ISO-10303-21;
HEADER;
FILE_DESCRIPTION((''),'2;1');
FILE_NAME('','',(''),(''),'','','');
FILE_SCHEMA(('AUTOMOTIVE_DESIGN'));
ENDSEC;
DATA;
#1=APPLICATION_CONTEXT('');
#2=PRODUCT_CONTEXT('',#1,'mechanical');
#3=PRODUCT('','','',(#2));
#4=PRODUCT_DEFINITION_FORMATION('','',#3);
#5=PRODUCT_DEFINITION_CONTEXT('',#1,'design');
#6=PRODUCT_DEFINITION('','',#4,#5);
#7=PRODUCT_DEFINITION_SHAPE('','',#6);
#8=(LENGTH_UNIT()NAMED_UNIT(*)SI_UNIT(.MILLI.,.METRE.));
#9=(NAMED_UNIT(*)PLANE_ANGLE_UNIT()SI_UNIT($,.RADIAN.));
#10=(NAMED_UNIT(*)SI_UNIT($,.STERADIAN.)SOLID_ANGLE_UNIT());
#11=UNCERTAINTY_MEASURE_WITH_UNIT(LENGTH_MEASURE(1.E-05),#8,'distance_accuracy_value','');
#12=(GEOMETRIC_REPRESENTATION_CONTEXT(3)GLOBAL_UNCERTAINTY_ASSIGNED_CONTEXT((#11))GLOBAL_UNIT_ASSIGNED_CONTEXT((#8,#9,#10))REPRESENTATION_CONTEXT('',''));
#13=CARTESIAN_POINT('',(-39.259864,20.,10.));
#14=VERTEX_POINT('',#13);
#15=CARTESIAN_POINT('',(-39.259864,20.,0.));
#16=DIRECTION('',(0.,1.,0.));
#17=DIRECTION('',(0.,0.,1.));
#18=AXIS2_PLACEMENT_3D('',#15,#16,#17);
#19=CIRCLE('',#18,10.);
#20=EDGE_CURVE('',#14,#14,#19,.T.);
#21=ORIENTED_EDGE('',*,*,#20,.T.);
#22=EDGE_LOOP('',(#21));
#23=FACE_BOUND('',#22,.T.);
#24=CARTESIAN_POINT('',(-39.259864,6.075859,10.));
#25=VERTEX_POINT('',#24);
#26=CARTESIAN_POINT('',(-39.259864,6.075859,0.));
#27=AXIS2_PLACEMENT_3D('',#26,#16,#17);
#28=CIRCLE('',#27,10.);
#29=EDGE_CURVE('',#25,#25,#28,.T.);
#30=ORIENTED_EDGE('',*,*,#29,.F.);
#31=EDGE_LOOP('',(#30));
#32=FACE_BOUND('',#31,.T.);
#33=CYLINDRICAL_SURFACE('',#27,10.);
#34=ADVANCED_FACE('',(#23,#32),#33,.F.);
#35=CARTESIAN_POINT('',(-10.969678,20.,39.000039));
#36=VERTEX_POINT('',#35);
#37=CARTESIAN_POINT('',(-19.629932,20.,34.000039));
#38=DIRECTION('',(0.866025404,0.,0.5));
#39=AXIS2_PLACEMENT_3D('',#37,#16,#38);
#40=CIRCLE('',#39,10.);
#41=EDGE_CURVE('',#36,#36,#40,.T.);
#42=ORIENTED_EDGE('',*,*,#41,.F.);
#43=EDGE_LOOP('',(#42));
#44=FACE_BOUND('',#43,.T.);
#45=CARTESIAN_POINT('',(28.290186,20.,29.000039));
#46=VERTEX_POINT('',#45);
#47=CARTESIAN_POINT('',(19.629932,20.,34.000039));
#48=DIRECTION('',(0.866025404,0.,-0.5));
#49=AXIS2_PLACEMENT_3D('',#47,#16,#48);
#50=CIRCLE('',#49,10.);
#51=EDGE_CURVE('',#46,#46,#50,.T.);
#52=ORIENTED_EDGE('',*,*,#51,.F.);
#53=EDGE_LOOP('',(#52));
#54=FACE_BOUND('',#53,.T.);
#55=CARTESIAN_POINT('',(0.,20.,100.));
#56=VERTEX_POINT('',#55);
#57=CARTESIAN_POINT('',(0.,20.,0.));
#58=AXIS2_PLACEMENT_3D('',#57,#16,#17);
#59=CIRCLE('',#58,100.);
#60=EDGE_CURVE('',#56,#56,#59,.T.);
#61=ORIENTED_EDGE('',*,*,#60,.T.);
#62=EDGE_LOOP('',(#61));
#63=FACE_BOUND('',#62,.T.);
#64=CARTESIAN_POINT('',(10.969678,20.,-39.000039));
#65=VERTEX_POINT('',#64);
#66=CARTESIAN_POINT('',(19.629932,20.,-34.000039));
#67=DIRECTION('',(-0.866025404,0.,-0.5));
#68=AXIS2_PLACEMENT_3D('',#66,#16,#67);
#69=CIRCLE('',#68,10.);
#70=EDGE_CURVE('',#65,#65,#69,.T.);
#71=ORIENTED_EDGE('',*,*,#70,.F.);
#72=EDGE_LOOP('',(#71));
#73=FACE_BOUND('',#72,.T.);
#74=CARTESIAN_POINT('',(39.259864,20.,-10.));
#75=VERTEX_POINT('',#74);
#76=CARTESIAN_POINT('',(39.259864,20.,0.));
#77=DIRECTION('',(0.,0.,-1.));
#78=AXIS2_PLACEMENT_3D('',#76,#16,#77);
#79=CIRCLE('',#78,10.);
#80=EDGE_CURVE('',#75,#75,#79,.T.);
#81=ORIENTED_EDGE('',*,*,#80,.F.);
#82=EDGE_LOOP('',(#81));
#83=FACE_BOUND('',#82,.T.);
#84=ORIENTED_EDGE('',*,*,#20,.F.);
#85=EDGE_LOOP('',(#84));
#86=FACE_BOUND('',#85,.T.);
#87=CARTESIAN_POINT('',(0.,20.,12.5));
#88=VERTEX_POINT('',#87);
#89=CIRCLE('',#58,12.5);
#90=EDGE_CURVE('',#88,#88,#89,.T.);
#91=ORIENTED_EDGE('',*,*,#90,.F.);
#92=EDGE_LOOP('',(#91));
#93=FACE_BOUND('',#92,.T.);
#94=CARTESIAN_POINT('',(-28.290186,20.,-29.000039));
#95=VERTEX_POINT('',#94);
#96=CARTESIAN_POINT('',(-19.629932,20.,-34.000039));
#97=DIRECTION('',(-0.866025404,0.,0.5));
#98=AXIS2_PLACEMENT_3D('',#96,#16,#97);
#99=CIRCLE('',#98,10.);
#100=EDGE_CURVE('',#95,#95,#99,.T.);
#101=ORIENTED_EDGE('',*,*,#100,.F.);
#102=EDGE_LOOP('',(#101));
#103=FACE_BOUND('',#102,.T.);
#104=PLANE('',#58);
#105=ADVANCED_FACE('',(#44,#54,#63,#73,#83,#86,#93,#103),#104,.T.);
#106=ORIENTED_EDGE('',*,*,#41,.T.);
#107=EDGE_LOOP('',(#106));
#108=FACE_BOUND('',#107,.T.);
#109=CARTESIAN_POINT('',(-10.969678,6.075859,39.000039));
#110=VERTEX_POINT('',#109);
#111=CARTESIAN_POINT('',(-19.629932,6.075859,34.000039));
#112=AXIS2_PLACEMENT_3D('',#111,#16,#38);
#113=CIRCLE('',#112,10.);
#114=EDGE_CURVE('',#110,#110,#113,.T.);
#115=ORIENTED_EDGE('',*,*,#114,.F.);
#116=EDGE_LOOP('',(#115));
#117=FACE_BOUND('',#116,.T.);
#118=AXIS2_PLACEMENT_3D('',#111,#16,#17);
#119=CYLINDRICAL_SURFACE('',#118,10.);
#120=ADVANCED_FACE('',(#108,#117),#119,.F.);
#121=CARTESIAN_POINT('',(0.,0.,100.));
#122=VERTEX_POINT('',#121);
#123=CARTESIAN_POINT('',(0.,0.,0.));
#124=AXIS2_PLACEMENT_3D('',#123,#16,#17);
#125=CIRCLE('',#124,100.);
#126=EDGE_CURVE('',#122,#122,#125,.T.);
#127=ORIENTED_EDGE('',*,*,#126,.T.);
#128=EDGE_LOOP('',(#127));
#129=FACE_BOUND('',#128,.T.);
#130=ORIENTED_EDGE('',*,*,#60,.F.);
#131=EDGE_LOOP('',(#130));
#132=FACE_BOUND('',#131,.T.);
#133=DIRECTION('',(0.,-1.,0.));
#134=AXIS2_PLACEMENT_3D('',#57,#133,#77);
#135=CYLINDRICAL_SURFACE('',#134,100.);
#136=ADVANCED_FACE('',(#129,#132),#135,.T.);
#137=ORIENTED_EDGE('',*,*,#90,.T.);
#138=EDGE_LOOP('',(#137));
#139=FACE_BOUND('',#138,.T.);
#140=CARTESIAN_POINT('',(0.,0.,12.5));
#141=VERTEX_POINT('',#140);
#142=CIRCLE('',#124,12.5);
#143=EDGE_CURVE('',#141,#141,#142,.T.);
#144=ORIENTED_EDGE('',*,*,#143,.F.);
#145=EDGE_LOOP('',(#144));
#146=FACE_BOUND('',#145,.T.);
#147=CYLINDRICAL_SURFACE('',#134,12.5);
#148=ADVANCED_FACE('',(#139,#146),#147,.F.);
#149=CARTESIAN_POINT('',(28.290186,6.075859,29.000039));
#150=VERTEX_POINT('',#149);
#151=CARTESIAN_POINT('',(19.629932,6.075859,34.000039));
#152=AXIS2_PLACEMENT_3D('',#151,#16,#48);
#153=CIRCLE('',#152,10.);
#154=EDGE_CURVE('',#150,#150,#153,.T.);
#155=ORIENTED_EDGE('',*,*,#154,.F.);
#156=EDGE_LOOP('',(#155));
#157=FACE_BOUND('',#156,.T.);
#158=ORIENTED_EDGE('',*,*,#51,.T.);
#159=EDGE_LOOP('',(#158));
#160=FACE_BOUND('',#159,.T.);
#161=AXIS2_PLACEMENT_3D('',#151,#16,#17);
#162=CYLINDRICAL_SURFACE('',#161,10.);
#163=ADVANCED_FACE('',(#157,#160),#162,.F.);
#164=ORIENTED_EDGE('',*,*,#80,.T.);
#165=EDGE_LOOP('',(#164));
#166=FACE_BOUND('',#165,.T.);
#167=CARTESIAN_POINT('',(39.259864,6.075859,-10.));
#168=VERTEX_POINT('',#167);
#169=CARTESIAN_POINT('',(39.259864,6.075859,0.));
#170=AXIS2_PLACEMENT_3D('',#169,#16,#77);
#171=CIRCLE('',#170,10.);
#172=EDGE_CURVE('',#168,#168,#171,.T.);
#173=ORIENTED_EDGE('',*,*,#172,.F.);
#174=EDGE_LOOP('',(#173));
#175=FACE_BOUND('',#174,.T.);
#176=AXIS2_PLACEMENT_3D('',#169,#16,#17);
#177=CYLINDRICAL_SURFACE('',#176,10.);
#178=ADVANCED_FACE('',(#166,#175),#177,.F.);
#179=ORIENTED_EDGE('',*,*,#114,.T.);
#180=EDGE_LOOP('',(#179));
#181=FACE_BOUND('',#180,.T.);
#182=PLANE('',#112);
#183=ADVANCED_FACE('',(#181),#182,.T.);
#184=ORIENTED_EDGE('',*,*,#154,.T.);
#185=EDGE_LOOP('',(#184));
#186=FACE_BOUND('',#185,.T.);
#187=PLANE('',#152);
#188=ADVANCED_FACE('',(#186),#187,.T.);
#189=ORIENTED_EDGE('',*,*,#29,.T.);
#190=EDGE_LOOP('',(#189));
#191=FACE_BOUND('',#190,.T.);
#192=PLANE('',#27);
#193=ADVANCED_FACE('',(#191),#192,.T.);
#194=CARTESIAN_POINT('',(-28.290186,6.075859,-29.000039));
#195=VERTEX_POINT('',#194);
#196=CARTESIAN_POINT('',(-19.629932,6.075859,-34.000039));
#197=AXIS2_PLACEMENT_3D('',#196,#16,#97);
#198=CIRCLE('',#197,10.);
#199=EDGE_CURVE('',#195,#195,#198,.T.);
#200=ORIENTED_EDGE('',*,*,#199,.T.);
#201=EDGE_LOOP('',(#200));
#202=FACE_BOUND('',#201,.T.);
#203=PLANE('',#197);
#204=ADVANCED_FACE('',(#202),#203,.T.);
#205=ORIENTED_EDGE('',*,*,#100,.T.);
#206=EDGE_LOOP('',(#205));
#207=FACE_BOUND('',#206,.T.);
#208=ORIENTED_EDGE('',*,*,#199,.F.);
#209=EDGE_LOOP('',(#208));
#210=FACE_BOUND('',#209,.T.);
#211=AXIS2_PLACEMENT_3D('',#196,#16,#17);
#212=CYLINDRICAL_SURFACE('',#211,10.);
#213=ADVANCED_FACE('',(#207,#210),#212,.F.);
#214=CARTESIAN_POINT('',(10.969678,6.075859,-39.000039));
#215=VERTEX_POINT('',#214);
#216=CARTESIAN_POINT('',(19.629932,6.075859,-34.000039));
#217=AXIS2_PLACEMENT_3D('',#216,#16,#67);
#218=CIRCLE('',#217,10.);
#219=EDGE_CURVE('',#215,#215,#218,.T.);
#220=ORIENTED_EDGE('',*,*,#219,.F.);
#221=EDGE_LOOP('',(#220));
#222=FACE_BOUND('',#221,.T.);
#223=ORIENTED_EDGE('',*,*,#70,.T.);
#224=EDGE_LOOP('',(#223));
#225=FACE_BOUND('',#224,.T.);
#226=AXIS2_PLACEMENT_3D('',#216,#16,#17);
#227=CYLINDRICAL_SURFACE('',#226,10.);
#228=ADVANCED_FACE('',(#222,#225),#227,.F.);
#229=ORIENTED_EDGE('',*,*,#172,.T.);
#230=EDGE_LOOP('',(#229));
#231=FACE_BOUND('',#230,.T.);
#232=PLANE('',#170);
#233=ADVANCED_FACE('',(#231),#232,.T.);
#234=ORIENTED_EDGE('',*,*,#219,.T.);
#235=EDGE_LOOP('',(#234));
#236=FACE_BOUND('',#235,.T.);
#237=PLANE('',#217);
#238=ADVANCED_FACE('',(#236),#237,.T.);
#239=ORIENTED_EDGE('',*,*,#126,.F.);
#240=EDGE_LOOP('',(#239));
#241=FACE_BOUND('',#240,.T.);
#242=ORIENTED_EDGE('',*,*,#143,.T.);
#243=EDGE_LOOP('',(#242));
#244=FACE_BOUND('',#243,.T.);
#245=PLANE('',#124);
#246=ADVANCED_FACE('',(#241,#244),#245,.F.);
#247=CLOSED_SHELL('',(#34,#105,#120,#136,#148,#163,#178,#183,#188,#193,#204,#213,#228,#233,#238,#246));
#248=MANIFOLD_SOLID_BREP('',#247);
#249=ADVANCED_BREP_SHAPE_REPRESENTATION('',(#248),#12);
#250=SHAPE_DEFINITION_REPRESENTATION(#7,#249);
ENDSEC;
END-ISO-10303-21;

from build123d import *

# Parameters (mm, degrees)
SKETCH1_R           = 100
BOSS_EXTRUDE1_DEPTH = 20
SKETCH2_R           = 12.5
CUT_EXTRUDE1_DEPTH  = 143.828568571
SKETCH3_R           = 10
CUT_EXTRUDE2_DEPTH  = 13.924141382
CIRPATTERN1_COUNT   = 6


with BuildPart() as part:
    # Sketch1 → Boss-Extrude1 (new body)
    with BuildSketch(Plane(origin=(0, 0, 0), x_dir=(1, 0, 0), z_dir=(0, 1, 0))):
        Circle(SKETCH1_R)
    extrude(amount=BOSS_EXTRUDE1_DEPTH)

    # Sketch2 → Cut-Extrude1 (cut, through all)
    with BuildSketch(Plane(origin=(0, 0, 0), x_dir=(1, 0, 0), z_dir=(0, 1, 0))):
        Circle(SKETCH2_R)
    extrude(amount=CUT_EXTRUDE1_DEPTH, mode=Mode.SUBTRACT)

    # Sketch3 → Cut-Extrude2 (cut)
    with BuildSketch(Plane(origin=(0, 20, 0), x_dir=(1, 0, 0), z_dir=(0, 1, 0))):
        with Locations((-39.259863889, 0)):
            Circle(SKETCH3_R)
    cut_extrude2 = extrude(amount=-CUT_EXTRUDE2_DEPTH, mode=Mode.SUBTRACT)

    # CirPattern1: Cut-Extrude2 ×6 about axis
    cirpattern1_axis = Axis((0, 0, 0), (0, 1, 0))
    for i in range(1, CIRPATTERN1_COUNT):
        add(cut_extrude2.rotate(cirpattern1_axis, i * 360 / CIRPATTERN1_COUNT), mode=Mode.SUBTRACT)


solid = part.part
